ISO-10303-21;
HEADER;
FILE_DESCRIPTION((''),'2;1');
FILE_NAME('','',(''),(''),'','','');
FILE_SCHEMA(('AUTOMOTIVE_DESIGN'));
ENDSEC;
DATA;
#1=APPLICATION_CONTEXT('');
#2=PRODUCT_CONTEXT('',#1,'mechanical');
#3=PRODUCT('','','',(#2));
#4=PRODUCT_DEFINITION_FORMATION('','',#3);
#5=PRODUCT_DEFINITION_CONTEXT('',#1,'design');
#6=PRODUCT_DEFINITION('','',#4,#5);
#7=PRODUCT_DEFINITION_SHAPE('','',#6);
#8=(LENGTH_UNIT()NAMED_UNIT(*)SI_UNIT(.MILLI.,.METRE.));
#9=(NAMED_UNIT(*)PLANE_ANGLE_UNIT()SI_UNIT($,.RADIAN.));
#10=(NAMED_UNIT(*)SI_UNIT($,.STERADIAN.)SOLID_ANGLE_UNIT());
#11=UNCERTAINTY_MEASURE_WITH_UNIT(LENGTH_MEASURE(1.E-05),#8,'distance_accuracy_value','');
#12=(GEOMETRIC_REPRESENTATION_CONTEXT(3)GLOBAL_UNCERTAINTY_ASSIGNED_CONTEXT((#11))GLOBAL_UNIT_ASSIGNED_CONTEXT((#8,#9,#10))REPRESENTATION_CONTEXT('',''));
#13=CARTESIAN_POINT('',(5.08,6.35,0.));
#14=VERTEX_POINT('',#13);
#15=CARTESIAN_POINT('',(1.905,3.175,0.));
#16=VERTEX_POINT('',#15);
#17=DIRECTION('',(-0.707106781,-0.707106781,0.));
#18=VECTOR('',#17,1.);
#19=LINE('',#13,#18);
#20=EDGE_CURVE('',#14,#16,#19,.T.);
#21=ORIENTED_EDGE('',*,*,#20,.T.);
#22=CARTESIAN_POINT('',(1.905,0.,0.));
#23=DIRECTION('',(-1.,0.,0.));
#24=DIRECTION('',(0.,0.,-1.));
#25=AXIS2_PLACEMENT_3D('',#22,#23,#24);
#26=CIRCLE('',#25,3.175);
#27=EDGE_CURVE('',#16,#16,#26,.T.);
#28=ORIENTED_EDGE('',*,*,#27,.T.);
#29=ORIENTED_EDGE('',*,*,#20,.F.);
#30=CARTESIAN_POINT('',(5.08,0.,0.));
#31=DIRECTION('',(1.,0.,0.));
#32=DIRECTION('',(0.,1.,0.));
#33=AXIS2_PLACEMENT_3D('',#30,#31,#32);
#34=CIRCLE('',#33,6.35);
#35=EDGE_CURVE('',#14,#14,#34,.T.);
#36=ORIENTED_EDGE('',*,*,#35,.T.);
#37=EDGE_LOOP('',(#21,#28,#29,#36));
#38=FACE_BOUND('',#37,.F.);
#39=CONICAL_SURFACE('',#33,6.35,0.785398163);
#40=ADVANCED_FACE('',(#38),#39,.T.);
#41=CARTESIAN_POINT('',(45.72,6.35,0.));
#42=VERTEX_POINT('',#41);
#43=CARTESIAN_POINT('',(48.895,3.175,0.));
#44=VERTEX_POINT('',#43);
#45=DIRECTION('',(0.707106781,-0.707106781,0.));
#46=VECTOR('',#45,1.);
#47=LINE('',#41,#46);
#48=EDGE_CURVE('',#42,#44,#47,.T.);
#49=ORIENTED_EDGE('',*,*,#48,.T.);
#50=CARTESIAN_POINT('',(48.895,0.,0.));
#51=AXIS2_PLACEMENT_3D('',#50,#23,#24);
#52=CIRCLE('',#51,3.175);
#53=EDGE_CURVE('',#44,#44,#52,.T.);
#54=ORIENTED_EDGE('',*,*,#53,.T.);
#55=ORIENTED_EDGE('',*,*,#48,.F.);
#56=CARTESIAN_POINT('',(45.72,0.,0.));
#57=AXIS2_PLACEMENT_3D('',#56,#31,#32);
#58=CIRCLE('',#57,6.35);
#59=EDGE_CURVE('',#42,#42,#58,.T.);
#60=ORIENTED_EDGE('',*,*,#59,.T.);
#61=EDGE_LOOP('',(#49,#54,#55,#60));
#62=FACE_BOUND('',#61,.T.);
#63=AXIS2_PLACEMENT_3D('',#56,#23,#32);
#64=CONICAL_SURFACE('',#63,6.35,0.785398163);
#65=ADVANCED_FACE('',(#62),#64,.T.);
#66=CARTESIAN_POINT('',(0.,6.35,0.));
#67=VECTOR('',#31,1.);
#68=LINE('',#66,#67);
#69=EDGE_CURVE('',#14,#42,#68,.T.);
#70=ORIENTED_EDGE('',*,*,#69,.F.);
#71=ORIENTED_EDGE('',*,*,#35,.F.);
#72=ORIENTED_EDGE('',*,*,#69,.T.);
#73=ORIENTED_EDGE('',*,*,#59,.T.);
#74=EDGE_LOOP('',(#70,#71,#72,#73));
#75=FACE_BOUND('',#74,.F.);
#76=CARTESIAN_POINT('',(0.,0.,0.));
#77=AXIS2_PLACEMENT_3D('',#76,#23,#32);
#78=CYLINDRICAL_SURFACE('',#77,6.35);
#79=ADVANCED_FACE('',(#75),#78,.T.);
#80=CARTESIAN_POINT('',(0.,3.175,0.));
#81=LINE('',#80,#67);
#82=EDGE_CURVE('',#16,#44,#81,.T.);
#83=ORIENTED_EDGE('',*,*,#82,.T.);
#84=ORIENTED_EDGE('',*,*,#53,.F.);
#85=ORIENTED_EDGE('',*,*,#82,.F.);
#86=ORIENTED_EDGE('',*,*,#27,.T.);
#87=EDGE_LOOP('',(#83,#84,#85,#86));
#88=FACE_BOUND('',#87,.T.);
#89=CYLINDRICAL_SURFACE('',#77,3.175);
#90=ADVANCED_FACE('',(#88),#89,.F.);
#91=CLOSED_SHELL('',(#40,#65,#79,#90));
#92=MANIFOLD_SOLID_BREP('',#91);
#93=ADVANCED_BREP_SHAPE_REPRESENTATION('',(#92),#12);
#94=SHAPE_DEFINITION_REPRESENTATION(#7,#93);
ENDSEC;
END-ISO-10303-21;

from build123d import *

# Parameters (mm, degrees)
F0_R     = 6.35
F0_R_2   = 3.175
F1_DEPTH = 50.8


# Not quite as in the source:
# - a fillet or chamfer that OpenCascade refuses, or shapes differently, is made with other operations: its cross-section is extruded or revolved along the edge and cut away or added


with BuildPart() as f1:
    # F0 (on Right) → F1 (new body)
    with BuildSketch(Plane.YZ):
        Circle(F0_R)
        Circle(F0_R_2, mode=Mode.SUBTRACT)
    extrude(amount=F1_DEPTH)

    # F2: chamfer of 5.08 on 3 edges, made by hand

    # F2_s1 → F2_t2 (revolve, cut)
    with BuildSketch(Plane.XY):
        Polygon((45.72, 6.35), (50.8, 1.27), (50.8, 6.35), align=None)
    revolve(axis=Axis((50.8, 0, 0), (1, 0, 0)), mode=Mode.SUBTRACT)

    # F2_s3 → F2_t4 (revolve, cut)
    with BuildSketch(Plane.XY):
        Polygon((5.08, 6.35), (0, 1.27), (0, 6.35), align=None)
    revolve(axis=Axis((0, 0, 0), (1, 0, 0)), mode=Mode.SUBTRACT)


solid = f1.part
